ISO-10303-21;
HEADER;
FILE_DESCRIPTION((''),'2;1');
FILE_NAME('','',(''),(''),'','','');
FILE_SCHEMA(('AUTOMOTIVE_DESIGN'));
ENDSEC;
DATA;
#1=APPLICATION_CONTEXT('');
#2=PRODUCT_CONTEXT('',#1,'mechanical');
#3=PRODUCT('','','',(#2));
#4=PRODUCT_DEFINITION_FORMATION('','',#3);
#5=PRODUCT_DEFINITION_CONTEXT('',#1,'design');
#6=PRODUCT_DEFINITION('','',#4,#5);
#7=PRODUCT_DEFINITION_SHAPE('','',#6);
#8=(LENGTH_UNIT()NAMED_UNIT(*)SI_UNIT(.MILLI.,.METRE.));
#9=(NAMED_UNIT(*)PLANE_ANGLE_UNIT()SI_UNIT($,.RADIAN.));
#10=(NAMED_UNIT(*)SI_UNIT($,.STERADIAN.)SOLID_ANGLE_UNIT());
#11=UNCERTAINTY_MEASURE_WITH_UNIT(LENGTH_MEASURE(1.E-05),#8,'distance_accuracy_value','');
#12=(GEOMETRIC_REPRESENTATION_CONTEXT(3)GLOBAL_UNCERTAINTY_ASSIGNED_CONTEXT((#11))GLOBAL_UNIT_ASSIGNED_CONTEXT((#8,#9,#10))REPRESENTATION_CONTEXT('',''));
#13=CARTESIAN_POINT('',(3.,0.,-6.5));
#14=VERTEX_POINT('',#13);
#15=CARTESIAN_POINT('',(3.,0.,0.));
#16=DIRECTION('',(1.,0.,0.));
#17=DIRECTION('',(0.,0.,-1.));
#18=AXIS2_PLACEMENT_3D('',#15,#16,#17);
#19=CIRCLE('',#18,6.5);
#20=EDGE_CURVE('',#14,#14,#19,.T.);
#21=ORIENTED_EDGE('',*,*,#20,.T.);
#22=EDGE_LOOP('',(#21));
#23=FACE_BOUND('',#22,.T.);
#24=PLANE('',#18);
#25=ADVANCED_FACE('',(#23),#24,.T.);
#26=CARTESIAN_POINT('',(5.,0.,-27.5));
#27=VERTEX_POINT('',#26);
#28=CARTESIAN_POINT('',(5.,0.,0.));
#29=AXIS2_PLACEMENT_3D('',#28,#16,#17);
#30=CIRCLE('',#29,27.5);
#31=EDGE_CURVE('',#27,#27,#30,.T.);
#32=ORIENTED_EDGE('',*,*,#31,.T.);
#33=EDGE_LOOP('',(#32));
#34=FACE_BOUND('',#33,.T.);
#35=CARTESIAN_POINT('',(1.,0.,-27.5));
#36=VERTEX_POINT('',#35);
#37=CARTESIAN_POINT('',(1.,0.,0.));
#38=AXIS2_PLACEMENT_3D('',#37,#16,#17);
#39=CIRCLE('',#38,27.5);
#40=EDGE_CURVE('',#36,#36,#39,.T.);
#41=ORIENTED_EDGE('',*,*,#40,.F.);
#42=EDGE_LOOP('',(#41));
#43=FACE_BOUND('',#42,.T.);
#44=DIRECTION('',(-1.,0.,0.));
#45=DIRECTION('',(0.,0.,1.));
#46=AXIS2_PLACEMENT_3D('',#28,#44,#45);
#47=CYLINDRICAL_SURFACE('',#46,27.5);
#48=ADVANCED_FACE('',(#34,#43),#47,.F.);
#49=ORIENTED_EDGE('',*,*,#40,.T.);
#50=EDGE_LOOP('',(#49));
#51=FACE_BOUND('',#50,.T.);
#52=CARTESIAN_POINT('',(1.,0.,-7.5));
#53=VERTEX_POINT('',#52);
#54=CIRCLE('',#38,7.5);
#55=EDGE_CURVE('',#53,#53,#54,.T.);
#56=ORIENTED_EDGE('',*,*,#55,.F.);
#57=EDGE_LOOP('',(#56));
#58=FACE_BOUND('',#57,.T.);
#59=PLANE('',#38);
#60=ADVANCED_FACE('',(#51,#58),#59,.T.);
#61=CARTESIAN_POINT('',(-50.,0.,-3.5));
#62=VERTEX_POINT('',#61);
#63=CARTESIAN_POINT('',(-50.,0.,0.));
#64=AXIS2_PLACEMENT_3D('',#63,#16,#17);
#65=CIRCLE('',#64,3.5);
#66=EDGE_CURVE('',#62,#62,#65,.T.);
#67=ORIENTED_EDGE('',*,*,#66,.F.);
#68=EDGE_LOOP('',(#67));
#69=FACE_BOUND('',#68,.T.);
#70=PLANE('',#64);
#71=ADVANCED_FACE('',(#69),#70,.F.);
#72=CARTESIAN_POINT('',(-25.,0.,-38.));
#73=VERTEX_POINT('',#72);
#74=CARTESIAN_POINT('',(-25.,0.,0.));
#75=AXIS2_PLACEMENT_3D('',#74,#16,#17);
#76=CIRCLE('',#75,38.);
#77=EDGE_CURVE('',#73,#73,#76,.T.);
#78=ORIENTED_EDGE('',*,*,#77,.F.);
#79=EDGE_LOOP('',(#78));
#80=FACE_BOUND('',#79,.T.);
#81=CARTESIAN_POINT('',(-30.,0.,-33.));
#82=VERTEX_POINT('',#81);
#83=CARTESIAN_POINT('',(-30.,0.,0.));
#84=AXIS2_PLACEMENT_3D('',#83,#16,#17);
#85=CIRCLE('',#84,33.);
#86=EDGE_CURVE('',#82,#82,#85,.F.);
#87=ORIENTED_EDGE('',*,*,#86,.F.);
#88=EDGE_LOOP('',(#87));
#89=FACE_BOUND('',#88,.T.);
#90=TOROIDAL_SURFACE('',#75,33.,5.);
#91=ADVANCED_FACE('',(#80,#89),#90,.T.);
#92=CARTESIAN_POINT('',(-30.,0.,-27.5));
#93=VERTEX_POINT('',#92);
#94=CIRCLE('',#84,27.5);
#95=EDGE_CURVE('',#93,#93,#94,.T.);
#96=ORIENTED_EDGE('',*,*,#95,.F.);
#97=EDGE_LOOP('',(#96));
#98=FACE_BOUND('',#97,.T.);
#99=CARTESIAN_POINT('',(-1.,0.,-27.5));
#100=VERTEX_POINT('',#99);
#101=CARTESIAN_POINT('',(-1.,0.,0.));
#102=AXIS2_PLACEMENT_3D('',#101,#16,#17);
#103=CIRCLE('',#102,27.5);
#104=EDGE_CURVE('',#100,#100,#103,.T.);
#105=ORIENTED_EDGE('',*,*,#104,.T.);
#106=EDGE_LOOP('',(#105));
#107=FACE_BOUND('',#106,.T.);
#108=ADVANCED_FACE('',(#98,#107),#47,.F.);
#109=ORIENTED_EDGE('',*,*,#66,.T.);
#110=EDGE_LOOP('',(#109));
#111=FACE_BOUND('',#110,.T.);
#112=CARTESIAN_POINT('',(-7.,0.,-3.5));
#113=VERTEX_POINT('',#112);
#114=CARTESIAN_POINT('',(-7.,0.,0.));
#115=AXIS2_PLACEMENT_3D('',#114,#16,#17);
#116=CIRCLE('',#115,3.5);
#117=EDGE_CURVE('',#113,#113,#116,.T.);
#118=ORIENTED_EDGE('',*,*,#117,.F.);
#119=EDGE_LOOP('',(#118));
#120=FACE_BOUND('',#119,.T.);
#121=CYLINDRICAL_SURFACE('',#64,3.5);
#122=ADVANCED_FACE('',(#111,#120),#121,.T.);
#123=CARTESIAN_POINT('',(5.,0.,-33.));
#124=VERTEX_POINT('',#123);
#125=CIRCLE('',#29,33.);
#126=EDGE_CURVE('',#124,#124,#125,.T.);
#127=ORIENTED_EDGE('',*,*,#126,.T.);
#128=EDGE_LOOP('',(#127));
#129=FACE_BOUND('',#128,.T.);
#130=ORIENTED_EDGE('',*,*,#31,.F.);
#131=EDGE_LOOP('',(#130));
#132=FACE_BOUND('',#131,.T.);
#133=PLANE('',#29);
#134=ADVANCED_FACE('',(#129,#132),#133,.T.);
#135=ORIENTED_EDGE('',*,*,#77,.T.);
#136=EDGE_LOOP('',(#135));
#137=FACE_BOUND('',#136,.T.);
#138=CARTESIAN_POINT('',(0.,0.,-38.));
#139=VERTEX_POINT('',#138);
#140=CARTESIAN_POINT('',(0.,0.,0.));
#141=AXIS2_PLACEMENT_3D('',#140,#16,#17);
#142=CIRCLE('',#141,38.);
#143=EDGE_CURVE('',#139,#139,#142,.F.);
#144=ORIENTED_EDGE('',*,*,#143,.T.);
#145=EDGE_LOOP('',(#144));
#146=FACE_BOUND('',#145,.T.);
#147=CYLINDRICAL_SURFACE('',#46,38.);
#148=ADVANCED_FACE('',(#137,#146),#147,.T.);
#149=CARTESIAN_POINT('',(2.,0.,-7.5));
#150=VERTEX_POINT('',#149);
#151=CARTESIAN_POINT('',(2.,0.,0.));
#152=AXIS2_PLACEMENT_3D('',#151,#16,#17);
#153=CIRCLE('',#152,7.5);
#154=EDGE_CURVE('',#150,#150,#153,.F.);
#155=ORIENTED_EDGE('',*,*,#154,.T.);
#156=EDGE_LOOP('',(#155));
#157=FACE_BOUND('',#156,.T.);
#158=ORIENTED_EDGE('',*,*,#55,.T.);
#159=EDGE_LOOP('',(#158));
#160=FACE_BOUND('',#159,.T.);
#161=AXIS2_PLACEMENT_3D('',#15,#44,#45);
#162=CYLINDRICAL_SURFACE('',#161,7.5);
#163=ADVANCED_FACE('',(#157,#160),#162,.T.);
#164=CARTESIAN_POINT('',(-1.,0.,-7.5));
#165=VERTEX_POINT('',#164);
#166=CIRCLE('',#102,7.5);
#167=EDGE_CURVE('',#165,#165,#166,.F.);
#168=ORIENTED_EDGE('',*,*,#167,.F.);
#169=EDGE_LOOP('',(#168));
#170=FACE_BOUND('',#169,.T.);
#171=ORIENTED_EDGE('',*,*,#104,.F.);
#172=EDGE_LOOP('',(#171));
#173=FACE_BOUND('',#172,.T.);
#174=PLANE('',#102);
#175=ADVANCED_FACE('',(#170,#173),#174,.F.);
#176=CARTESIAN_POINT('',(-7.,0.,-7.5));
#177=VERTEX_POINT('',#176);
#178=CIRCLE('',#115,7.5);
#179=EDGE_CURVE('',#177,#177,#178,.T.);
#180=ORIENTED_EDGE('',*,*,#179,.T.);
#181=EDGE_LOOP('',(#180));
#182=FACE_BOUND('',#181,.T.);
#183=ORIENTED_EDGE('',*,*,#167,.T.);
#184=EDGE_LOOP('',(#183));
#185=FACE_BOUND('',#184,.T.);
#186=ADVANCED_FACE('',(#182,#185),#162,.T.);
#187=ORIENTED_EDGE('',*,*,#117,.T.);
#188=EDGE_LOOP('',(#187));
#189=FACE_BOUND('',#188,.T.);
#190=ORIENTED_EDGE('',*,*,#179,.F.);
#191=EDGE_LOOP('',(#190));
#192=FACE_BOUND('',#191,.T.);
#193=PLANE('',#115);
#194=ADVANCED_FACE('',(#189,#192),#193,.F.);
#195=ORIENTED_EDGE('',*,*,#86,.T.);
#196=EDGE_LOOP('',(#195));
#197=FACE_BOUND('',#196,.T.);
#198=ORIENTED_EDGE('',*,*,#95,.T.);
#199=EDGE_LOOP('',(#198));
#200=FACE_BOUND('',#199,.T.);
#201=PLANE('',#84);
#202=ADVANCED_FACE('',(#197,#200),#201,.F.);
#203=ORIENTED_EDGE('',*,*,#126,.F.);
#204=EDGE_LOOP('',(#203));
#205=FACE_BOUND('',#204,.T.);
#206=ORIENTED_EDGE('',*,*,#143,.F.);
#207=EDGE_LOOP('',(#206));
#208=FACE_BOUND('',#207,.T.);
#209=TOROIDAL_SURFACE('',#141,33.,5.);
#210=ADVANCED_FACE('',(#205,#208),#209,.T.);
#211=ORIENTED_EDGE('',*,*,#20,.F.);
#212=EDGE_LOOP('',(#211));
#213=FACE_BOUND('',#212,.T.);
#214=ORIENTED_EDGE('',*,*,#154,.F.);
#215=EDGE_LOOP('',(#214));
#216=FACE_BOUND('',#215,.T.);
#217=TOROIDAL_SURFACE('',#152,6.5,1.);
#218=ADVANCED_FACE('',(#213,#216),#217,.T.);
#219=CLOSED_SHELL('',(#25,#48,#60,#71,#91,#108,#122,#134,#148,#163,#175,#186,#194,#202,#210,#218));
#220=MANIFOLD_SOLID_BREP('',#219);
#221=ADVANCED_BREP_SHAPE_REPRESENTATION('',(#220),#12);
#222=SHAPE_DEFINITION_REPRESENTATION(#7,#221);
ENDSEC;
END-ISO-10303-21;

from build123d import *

# Parameters (mm, degrees)
BOSS_EXTRUDE1_DEPTH      = 5
BOSS_EXTRUDE1_DEPTH_BACK = 30
SKETCH1_R                = 38
SKETCH1_R_2              = 27.5
BOSS_EXTRUDE2_DEPTH      = 3
BOSS_EXTRUDE2_DEPTH_BACK = 7
SKETCH1_3_R              = 7.5
SKETCH1_4_R              = 3.5
BOSS_EXTRUDE3_DEPTH      = 50
SKETCH1_5_R              = 27.5
SKETCH1_5_R_2            = 7.5
BOSS_EXTRUDE4_DEPTH      = 1
FILLET1_R                = 5
FILLET2_R                = 1


with BuildPart() as part:
    # Sketch1 → Boss-Extrude1 (new, two sides: drawn at the far end of the back side and taken through both)
    with BuildSketch(Plane(origin=(0, 0, 0), x_dir=(0, 0, -1), z_dir=(1, 0, 0)).offset(-BOSS_EXTRUDE1_DEPTH_BACK)):
        Circle(SKETCH1_R)
        Circle(SKETCH1_R_2, mode=Mode.SUBTRACT)
    extrude(amount=BOSS_EXTRUDE1_DEPTH + BOSS_EXTRUDE1_DEPTH_BACK)



with BuildPart() as body_2:
    # Sketch1<3> → Boss-Extrude2 (new, two sides: drawn at the far end of the back side and taken through both)
    with BuildSketch(Plane(origin=(0, 0, 0), x_dir=(0, 0, -1), z_dir=(1, 0, 0)).offset(-BOSS_EXTRUDE2_DEPTH_BACK)):
        Circle(SKETCH1_3_R)
    extrude(amount=BOSS_EXTRUDE2_DEPTH + BOSS_EXTRUDE2_DEPTH_BACK)

    # Sketch1<4> → Boss-Extrude3 (add)
    with BuildSketch(Plane(origin=(0, 0, 0), x_dir=(0, 0, -1), z_dir=(1, 0, 0))):
        Circle(SKETCH1_4_R)
    extrude(amount=-BOSS_EXTRUDE3_DEPTH)


with BuildPart() as part_1:
    add(part.part)

    add(body_2.part)  # Boss-Extrude4 merges body 2
    # Sketch1<5> → Boss-Extrude4 (add, symmetric)
    with BuildSketch(Plane(origin=(0, 0, 0), x_dir=(0, 0, -1), z_dir=(1, 0, 0))):
        Circle(SKETCH1_5_R)
        Circle(SKETCH1_5_R_2, mode=Mode.SUBTRACT)
    extrude(amount=BOSS_EXTRUDE4_DEPTH, both=True)

    # Fillet1
    fillet1_edges = [part_1.edges().sort_by_distance(p)[0] for p in [
        (5, 0, 38),
        (-30, 0, 38),
    ]]
    fillet(fillet1_edges, radius=FILLET1_R - 0.0001)  # a hair under: the kernel refuses the full size

    # Fillet2
    fillet2_edges = [part_1.edges().sort_by_distance(p)[0] for p in [
        (3, 0, 7.5),
    ]]
    fillet(fillet2_edges, radius=FILLET2_R)


solid = part_1.part
